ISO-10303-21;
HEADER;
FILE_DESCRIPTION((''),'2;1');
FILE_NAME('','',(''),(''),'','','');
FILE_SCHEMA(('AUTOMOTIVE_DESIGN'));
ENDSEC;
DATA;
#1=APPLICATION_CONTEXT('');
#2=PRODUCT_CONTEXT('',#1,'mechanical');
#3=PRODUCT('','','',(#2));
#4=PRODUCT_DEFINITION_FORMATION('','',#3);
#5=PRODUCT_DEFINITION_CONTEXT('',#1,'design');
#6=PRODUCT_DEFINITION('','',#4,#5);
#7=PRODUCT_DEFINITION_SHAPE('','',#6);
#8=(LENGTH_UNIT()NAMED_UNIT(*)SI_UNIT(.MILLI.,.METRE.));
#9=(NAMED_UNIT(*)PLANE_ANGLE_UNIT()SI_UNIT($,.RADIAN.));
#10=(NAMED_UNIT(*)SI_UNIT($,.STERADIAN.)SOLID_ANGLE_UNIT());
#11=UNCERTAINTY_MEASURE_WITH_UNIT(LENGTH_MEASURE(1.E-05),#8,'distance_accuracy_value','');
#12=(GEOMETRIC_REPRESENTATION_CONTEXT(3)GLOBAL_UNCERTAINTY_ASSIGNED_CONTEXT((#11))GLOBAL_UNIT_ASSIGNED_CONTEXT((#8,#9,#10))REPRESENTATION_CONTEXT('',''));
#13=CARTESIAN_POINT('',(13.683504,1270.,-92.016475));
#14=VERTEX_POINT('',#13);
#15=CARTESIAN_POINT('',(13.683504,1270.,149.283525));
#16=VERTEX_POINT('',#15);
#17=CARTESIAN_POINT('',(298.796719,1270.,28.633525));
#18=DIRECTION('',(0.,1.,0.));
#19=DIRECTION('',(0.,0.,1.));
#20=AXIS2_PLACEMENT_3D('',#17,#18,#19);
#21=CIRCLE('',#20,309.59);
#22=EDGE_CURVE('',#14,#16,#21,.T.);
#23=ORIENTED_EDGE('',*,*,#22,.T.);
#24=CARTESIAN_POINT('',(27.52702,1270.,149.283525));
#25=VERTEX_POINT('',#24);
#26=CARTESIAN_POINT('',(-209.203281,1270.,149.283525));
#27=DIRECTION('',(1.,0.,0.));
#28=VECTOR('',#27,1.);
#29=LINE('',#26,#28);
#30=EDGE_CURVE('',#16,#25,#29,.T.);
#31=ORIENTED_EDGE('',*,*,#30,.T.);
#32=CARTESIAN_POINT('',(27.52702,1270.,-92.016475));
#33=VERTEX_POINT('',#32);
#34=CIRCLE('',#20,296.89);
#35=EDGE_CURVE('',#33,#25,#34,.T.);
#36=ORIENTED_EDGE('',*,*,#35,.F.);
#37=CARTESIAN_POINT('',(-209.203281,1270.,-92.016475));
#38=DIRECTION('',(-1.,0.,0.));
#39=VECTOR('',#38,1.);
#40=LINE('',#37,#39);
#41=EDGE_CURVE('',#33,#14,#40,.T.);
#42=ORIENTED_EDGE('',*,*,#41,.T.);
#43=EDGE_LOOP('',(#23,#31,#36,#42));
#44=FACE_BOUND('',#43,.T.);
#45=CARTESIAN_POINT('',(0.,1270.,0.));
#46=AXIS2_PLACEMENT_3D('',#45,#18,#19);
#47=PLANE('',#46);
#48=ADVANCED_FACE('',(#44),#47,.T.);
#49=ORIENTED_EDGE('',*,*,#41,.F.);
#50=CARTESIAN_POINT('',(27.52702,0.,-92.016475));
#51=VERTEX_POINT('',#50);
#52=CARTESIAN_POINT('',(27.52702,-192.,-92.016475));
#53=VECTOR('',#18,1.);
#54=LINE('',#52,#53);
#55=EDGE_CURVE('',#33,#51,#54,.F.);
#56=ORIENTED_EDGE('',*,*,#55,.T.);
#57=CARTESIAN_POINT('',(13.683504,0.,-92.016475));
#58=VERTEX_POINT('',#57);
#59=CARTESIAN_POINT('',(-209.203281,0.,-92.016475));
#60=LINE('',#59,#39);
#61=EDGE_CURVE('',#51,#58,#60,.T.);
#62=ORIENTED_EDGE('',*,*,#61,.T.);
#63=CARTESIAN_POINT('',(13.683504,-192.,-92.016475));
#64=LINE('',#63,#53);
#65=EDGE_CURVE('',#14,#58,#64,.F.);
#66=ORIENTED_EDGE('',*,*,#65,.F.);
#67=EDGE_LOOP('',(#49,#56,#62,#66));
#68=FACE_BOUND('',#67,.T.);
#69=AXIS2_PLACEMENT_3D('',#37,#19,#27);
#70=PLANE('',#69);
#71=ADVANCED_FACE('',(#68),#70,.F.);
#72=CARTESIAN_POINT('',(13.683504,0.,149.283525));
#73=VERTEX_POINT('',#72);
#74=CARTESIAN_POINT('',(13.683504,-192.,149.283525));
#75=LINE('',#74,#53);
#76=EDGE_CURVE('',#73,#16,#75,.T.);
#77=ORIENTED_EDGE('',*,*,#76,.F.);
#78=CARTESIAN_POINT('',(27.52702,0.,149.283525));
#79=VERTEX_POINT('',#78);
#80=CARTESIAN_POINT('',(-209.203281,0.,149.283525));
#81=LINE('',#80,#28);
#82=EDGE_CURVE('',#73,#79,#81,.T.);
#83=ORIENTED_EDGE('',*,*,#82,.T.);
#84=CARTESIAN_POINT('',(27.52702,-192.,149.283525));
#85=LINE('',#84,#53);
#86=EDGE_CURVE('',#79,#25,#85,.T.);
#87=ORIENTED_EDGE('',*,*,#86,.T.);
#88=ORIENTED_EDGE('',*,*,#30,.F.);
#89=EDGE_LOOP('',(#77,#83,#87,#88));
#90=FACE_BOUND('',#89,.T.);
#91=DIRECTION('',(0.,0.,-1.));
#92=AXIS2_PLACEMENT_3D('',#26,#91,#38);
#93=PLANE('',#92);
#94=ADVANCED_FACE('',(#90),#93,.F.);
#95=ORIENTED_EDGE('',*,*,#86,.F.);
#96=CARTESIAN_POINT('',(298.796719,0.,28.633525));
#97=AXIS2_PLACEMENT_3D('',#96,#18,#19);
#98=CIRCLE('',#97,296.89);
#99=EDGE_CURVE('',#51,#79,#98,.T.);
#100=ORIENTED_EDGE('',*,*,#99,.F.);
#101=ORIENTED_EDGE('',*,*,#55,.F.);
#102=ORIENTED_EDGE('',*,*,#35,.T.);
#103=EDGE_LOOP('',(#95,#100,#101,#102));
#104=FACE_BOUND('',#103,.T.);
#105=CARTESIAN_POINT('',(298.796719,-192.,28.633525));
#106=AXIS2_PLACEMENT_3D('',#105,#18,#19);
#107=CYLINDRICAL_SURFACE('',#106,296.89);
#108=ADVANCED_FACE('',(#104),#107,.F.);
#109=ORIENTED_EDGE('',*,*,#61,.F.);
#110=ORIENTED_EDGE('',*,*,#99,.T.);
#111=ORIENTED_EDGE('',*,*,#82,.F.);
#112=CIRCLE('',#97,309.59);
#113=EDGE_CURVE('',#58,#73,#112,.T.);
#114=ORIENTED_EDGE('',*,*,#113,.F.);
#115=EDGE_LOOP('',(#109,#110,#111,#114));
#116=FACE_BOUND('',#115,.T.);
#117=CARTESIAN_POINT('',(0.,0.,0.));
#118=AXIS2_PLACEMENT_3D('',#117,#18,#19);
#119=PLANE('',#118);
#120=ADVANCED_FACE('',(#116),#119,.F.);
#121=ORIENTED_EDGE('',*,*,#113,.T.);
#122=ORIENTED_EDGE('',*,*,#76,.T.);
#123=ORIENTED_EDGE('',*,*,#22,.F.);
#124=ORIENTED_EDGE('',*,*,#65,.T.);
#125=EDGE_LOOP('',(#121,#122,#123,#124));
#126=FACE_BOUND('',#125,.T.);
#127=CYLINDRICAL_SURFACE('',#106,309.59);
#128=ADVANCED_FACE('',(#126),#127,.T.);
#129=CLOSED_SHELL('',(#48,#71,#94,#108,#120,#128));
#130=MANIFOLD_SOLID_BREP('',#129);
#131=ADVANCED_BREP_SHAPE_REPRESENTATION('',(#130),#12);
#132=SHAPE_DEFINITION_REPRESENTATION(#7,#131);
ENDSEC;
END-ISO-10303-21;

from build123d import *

# Parameters (mm, degrees)
SKETCH1_W           = 508
SKETCH1_H           = 241.3
BOSS_EXTRUDE1_DEPTH = 1270
CUT_EXTRUDE5_START  = -1270
CUT_EXTRUDE5_DEPTH  = 1270


# Read off the part's stored shape, not the designer's step: Cut-Extrude5
with BuildPart() as part:
    # Sketch1 → Boss-Extrude1 (new body)
    with BuildSketch(Plane(origin=(0, 0, 0), x_dir=(1, 0, 0), z_dir=(0, 1, 0))):
        with Locations((44.796719309, -28.633525346)):
            Rectangle(SKETCH1_W, SKETCH1_H)
    extrude(amount=BOSS_EXTRUDE1_DEPTH)

    # Cut-Extrude5 outline → Cut-Extrude5 (cut)
    with BuildSketch(Plane(origin=(0, 1270, 0), x_dir=(1, 0, 0), z_dir=(0, 1, 0)).offset(CUT_EXTRUDE5_START)):
        with BuildLine():
            Line((298.796719309, 92.016474654), (27.527020301, 92.016474654))
            ThreePointArc((27.527020301, 92.016474654), (1.906719309, -28.633525346), (27.527020301, -149.283525346))
            Line((27.527020301, -149.283525346), (298.796719309, -149.283525346))
            Line((298.796719309, -149.283525346), (298.796719309, 92.016474654))
        make_face()
        with BuildLine():
            ThreePointArc((13.683503901, -149.283525346), (-10.793280691, -28.633525346), (13.683503901, 92.016474654))
            Line((13.683503901, 92.016474654), (-209.203280691, 92.016474654))
            Line((-209.203280691, 92.016474654), (-209.203280691, -149.283525346))
            Line((-209.203280691, -149.283525346), (13.683503901, -149.283525346))
        make_face()
    extrude(amount=CUT_EXTRUDE5_DEPTH, mode=Mode.SUBTRACT)


solid = part.part
